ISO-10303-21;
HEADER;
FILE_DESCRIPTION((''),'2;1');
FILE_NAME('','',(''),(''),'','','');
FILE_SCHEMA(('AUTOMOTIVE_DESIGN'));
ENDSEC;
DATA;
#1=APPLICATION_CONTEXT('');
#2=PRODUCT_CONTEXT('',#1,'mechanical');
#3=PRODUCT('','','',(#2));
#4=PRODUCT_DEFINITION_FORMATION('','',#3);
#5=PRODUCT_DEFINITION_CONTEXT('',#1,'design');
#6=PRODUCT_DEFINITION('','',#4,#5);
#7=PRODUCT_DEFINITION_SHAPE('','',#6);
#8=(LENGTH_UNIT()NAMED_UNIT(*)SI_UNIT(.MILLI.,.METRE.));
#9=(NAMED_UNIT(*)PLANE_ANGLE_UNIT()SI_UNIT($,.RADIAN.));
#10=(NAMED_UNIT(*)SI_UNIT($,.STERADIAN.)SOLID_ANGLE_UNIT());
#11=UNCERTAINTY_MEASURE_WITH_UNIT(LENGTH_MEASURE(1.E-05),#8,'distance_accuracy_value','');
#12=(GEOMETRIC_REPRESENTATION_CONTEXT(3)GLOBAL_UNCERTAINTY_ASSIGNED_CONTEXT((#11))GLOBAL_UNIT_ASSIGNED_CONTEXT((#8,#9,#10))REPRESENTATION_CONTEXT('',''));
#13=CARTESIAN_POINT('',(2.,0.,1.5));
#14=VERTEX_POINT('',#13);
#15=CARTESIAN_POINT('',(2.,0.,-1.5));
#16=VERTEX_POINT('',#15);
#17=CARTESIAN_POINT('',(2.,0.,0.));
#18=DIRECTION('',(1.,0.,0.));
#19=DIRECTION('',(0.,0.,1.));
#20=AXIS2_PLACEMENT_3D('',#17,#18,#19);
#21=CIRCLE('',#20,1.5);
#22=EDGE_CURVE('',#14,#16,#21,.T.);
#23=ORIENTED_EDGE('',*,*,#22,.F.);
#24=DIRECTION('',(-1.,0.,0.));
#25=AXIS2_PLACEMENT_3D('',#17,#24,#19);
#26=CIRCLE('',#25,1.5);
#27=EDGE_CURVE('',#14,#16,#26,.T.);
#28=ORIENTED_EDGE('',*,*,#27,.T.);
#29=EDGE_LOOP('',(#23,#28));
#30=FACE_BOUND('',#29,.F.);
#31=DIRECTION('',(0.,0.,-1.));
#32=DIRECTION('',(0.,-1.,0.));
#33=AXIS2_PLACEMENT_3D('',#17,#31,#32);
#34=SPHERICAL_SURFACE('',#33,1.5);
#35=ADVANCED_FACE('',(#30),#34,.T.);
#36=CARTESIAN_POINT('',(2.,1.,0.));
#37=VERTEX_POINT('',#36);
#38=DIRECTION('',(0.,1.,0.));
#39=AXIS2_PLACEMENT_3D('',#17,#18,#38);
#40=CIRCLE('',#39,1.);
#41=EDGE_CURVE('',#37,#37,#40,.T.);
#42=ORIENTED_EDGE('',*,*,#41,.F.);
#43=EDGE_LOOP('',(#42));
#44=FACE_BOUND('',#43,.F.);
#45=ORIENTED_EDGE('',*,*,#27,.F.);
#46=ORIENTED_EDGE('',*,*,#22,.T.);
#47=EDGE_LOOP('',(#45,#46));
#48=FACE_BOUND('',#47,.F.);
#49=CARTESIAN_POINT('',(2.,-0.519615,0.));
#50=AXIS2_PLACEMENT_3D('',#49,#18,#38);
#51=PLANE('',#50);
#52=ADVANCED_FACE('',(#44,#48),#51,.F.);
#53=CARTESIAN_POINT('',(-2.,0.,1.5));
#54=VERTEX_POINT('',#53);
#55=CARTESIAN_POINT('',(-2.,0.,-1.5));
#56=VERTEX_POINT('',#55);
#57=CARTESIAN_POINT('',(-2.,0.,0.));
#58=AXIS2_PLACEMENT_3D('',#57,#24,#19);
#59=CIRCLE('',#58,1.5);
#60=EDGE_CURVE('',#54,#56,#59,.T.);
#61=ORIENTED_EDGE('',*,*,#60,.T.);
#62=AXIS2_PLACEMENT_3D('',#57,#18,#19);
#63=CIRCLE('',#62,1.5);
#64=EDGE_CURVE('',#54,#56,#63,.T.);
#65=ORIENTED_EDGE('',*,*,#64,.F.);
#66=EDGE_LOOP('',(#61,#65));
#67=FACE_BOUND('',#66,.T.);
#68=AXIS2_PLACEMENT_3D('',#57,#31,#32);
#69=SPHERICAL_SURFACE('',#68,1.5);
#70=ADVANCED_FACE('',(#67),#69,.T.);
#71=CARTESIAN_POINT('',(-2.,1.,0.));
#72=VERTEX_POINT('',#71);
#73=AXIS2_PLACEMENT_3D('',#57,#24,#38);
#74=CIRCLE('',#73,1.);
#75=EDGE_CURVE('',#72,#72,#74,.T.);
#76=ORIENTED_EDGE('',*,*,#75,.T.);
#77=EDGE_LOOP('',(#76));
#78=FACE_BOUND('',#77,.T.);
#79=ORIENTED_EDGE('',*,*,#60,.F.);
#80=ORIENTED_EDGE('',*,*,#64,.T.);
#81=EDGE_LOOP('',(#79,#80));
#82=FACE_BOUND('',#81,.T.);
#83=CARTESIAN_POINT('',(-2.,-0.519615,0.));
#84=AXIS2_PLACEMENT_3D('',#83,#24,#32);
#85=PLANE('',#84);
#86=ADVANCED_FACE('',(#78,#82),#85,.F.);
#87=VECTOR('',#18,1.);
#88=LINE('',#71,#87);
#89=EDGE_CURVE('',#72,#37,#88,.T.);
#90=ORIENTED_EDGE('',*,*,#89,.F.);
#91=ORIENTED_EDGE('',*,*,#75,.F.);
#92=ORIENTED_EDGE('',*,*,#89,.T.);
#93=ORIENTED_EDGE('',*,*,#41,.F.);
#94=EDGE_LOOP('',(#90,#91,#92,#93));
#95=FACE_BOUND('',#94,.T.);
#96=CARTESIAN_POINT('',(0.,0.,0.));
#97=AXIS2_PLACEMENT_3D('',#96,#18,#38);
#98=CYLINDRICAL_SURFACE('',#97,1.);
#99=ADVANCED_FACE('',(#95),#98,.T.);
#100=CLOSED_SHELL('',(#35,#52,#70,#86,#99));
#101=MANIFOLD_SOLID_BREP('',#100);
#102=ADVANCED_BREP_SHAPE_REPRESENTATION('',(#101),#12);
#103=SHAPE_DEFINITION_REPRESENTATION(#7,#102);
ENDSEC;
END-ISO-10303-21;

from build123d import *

# Parameters (mm, degrees)
F0_R     = 1
F1_DEPTH = 2
F3_ANGLE = 180


# Not quite as in the source:
# - a pattern or mirror of a feature is missing from the dataset's text; its kind, count and spacing are read off the source's solid


with BuildPart() as f1:
    # F0 (on Right) → F1 (new body, symmetric)
    with BuildSketch(Plane.YZ):
        Circle(F0_R)
    extrude(amount=F1_DEPTH, both=True)

    # F2 (on face) → F3 (revolve)
    with BuildSketch(Plane.YZ.offset(2)):
        with BuildLine():
            Line((0, -1.5), (0, 1.5))
            ThreePointArc((0, 1.5), (-1.5, 0), (0, -1.5))
        make_face()
    f3 = revolve(axis=Axis((2, 0, 0), (0, 0, 1)), revolution_arc=F3_ANGLE)

    # F3_copies: F3 across plane
    add(f3.mirror(Plane(origin=(0, 0, 0), x_dir=(0, 0, -1), z_dir=(-1, 0, 0))))


solid = f1.part
